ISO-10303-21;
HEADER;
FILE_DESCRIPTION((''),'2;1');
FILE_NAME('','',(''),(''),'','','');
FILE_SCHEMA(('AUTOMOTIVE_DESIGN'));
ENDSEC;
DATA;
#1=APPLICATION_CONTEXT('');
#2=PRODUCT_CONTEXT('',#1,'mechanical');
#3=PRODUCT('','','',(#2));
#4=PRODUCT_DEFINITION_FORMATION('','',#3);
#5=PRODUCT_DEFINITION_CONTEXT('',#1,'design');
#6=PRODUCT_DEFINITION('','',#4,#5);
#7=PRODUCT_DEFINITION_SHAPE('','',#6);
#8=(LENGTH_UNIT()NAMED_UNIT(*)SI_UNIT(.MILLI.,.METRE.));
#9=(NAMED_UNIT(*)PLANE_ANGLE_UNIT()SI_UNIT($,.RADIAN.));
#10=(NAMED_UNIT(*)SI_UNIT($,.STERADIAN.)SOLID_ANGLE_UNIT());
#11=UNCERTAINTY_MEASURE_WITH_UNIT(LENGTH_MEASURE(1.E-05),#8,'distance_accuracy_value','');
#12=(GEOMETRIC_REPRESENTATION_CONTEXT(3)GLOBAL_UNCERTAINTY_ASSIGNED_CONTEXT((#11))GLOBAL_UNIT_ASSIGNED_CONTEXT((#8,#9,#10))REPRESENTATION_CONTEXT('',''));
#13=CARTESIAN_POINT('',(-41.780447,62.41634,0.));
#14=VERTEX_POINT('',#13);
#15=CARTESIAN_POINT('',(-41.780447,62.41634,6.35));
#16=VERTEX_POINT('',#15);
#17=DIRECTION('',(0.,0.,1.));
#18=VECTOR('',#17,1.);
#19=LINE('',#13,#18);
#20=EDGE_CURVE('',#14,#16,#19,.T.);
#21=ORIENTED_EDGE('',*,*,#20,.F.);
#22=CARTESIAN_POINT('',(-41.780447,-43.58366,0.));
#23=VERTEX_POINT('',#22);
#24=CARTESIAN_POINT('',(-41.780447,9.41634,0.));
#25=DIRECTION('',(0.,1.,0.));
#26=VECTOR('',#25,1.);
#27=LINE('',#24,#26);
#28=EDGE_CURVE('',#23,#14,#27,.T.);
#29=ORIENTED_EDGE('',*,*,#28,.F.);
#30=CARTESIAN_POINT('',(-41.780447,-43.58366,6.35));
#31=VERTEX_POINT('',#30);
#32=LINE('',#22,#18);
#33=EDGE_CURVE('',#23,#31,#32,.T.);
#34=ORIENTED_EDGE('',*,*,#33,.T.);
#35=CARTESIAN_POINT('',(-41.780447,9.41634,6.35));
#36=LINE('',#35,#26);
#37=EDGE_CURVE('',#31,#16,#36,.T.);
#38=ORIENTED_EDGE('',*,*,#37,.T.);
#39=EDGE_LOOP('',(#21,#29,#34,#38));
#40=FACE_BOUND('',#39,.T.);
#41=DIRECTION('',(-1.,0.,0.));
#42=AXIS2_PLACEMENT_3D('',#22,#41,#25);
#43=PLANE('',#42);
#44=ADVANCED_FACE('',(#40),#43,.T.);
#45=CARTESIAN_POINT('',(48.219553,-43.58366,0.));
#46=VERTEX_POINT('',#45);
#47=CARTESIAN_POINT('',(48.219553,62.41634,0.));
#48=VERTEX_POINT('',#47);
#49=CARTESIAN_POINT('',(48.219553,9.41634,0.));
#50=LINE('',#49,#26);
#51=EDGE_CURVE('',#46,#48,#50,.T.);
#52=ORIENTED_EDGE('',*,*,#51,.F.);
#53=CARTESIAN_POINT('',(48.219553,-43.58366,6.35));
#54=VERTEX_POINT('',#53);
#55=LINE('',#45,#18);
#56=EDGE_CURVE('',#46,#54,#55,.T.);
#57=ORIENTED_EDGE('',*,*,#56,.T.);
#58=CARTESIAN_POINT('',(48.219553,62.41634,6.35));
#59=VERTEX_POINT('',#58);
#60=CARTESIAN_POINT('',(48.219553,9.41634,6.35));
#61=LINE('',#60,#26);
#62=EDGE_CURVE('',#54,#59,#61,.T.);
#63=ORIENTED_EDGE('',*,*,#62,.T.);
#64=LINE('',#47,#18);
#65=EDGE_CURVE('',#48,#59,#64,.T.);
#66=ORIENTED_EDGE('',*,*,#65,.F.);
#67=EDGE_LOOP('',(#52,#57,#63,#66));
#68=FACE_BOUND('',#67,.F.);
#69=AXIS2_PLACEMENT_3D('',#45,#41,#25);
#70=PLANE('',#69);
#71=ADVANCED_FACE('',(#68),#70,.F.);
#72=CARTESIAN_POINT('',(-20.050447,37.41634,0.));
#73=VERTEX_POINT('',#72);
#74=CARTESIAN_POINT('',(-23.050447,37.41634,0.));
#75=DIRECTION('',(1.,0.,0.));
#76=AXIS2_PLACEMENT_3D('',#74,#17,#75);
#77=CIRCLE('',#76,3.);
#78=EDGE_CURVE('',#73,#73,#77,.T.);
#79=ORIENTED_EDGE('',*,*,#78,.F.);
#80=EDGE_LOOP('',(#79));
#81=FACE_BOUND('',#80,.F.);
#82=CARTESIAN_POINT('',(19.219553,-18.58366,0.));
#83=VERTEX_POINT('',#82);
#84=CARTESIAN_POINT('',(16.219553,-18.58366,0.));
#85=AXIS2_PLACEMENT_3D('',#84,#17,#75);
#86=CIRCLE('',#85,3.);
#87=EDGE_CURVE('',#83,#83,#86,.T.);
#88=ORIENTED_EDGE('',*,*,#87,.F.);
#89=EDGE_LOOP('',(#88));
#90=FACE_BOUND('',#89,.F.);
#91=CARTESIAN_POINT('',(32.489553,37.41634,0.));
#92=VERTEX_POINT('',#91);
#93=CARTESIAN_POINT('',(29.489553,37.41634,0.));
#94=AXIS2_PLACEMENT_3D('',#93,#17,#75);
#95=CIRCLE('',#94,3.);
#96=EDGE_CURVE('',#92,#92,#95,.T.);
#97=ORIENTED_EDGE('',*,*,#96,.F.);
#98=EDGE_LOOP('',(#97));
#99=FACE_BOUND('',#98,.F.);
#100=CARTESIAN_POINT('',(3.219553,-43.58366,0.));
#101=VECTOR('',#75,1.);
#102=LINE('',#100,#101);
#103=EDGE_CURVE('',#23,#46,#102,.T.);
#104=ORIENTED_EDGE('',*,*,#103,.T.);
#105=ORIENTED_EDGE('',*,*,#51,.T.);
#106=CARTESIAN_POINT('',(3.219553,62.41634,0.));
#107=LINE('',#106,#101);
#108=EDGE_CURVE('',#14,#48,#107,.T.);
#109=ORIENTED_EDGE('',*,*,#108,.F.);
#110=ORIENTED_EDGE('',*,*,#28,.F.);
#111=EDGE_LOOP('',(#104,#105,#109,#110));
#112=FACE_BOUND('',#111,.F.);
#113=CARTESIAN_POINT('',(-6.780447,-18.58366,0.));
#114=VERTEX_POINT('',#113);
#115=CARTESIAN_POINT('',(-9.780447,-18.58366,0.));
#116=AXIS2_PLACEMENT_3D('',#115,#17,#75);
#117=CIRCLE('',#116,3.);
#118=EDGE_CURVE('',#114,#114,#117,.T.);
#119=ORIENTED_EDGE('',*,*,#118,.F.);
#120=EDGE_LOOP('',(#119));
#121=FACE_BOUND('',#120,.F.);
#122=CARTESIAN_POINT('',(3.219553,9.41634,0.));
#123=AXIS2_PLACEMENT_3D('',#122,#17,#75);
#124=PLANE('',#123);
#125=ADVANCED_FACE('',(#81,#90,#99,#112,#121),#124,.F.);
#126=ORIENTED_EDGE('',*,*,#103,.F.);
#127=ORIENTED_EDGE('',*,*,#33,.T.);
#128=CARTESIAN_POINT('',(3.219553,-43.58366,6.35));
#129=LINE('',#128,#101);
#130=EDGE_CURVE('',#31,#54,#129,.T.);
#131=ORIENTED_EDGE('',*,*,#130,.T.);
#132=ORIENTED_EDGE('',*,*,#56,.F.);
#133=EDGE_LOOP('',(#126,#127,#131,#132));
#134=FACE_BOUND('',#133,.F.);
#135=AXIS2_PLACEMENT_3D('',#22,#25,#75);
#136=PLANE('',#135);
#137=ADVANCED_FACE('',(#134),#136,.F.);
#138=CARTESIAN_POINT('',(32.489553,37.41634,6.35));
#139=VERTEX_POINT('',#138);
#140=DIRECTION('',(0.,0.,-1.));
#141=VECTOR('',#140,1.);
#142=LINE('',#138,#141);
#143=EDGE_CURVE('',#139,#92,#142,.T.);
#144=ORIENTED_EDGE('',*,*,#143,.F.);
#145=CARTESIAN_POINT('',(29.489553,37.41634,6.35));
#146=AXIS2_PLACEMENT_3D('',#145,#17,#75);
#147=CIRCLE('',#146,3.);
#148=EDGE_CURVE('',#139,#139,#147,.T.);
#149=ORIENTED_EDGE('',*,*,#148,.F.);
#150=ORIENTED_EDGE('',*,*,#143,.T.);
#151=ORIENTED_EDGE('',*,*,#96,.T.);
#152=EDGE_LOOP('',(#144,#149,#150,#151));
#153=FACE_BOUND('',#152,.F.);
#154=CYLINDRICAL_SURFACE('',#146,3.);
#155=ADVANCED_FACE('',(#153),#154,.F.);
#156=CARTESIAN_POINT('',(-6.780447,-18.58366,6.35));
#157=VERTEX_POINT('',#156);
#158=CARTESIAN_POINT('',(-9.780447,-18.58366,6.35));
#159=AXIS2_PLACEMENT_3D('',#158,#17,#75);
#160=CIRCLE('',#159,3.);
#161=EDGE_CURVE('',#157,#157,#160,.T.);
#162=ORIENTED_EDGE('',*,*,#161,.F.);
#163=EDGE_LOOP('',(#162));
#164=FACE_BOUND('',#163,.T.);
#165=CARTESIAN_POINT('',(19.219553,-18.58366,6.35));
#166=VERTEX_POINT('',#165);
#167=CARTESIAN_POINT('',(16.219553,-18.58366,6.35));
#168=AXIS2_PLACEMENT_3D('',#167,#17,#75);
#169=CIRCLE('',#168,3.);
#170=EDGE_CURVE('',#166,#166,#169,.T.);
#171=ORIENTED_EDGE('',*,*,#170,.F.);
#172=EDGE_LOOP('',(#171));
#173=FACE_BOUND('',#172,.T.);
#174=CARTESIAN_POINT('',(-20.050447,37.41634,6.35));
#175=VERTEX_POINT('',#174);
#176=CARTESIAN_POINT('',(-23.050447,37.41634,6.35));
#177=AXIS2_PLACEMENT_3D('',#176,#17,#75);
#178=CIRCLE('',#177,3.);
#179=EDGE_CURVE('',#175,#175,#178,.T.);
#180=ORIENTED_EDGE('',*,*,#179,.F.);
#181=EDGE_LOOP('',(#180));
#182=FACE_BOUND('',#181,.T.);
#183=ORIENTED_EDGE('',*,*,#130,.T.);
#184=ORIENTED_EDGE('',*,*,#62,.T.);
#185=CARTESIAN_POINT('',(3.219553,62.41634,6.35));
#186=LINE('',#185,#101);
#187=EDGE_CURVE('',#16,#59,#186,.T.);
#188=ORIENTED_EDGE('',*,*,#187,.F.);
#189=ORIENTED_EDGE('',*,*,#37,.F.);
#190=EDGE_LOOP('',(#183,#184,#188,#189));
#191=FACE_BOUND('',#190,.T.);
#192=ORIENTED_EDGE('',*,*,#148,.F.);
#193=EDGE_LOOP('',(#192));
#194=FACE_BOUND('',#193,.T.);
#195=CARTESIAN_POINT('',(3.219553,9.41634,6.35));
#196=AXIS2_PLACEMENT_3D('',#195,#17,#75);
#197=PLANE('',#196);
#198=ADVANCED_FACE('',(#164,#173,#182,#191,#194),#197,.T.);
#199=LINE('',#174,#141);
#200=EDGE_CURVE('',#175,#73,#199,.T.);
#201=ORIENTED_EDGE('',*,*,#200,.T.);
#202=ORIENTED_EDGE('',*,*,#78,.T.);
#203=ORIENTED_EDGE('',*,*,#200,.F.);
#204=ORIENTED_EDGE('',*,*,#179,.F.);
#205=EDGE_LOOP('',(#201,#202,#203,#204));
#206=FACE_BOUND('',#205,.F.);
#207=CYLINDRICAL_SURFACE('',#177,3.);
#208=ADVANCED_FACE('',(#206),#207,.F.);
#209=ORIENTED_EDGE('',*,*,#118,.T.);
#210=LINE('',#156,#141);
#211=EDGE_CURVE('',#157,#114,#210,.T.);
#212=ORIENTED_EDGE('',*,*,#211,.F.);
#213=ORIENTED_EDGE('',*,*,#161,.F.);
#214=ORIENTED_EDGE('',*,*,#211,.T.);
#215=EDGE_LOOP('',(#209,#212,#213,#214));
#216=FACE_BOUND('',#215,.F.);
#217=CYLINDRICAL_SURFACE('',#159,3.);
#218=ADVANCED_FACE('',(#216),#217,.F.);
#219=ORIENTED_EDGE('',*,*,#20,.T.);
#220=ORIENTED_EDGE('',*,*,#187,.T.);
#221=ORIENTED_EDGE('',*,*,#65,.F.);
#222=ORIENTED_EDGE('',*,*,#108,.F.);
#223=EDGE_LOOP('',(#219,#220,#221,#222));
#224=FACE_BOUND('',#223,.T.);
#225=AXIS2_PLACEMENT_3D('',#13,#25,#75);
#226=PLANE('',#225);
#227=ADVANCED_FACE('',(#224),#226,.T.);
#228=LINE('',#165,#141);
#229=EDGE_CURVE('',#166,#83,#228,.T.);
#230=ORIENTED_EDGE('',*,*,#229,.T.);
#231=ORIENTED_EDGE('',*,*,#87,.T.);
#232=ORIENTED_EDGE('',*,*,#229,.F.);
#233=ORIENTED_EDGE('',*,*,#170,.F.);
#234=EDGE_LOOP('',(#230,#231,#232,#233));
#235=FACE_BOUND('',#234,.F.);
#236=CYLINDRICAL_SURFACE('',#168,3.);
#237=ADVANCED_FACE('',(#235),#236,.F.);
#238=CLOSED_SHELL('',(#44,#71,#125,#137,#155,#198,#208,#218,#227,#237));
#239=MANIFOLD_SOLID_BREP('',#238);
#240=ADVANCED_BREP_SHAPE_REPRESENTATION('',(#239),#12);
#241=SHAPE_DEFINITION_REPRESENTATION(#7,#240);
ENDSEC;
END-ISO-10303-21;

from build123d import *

# Parameters (mm, degrees)
F0_W     = 90
F0_H     = 106
F1_DEPTH = 6.35
F2_R     = 3
F3_DEPTH = 25


# Not quite as in the source:
# - a length typed as a fraction of an inch, garbled in the dataset ("3 / 203.2 mm" for 3/8 in), is restored


with BuildPart() as f1:
    # F0 (on Top) → F1 (new body)
    with BuildSketch(Plane.XY):
        with Locations((3.2195534329, 9.4163397849)):
            Rectangle(F0_W, F0_H)
    extrude(amount=F1_DEPTH)

    # F2 (on face) → F3 (cut)
    with BuildSketch(Plane.XY.offset(6.35)):
        with Locations((-23.0504465671, 37.4163397849)):
            Circle(F2_R)
        with Locations((29.4895534329, 37.4163397849)):
            Circle(F2_R)
        with Locations((-9.7804465671, -18.5836602151)):
            Circle(F2_R)
        with Locations((16.2195534329, -18.5836602151)):
            Circle(F2_R)
    extrude(amount=-F3_DEPTH, mode=Mode.SUBTRACT)


solid = f1.part
